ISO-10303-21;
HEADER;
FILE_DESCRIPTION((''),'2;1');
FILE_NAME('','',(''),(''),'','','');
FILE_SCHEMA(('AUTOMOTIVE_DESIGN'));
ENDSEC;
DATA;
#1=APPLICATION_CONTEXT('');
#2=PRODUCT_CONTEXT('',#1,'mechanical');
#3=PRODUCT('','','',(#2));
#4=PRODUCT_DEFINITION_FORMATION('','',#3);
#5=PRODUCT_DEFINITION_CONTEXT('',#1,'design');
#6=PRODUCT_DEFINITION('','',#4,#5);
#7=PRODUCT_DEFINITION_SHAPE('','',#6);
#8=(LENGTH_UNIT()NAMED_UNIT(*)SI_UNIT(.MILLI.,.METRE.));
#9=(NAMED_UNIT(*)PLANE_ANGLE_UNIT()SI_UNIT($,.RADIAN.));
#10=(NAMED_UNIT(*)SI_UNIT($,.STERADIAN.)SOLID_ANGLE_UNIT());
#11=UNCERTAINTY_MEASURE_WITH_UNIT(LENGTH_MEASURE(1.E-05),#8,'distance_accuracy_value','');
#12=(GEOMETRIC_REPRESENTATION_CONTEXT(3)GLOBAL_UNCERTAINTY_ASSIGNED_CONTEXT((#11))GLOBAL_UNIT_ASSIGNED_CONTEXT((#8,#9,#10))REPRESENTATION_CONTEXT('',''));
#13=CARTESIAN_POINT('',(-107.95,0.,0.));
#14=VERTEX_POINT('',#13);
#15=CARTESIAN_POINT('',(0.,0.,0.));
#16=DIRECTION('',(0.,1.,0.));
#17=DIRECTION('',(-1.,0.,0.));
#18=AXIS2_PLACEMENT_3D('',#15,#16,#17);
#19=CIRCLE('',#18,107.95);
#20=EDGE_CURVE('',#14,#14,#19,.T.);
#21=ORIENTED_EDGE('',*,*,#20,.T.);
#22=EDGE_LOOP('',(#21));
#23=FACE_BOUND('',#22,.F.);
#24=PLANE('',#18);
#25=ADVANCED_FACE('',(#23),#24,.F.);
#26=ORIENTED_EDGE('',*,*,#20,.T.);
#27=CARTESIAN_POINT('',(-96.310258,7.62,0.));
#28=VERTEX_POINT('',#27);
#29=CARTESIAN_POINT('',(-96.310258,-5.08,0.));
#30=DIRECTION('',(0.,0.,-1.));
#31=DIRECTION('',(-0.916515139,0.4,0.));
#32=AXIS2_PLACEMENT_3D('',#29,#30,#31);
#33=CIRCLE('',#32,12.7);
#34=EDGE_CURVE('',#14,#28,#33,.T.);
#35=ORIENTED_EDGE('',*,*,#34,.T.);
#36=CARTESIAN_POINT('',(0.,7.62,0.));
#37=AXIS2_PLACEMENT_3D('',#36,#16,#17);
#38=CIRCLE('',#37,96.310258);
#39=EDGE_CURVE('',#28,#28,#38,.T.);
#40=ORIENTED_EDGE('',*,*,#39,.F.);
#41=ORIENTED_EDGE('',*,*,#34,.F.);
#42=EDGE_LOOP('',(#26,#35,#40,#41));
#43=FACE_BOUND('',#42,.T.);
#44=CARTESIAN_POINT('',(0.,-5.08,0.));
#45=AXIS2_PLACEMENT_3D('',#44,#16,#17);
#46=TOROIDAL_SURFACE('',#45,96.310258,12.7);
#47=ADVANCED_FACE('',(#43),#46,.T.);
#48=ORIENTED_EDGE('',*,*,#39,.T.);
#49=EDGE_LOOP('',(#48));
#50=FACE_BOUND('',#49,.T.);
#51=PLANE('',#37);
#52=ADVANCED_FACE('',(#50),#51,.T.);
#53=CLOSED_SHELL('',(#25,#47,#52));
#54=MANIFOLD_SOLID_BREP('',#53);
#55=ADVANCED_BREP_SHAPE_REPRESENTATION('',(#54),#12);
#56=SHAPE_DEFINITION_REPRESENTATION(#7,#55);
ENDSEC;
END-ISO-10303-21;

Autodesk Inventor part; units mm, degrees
ref_plane "YZ Plane" through (0, 0, 0) normal (1, 0, 0) x (0, 1, 0)
ref_plane "XZ Plane" through (0, 0, 0) normal (0, 1, 0) x (-1, 0, 0)
sketch "Sketch1" plane through (0, 0, 0) normal (0, 1, 0) x (-1, 0, 0)
  circle A0 centre (0, 0) radius 107.95
  dimension "d0" = 215.9
extrude "Extrusion1" add sketch "Sketch1" along normal blind 7.62
ref_plane "Work Plane1" through (0, 0, 107.95) normal (0, 0, 1) x (1, 0, 0)
fillet "Fillet1" radius 12.7 1 edges at (107.95, 7.62, 0)
properties part number "CapTop-ver1-1111-2021"
